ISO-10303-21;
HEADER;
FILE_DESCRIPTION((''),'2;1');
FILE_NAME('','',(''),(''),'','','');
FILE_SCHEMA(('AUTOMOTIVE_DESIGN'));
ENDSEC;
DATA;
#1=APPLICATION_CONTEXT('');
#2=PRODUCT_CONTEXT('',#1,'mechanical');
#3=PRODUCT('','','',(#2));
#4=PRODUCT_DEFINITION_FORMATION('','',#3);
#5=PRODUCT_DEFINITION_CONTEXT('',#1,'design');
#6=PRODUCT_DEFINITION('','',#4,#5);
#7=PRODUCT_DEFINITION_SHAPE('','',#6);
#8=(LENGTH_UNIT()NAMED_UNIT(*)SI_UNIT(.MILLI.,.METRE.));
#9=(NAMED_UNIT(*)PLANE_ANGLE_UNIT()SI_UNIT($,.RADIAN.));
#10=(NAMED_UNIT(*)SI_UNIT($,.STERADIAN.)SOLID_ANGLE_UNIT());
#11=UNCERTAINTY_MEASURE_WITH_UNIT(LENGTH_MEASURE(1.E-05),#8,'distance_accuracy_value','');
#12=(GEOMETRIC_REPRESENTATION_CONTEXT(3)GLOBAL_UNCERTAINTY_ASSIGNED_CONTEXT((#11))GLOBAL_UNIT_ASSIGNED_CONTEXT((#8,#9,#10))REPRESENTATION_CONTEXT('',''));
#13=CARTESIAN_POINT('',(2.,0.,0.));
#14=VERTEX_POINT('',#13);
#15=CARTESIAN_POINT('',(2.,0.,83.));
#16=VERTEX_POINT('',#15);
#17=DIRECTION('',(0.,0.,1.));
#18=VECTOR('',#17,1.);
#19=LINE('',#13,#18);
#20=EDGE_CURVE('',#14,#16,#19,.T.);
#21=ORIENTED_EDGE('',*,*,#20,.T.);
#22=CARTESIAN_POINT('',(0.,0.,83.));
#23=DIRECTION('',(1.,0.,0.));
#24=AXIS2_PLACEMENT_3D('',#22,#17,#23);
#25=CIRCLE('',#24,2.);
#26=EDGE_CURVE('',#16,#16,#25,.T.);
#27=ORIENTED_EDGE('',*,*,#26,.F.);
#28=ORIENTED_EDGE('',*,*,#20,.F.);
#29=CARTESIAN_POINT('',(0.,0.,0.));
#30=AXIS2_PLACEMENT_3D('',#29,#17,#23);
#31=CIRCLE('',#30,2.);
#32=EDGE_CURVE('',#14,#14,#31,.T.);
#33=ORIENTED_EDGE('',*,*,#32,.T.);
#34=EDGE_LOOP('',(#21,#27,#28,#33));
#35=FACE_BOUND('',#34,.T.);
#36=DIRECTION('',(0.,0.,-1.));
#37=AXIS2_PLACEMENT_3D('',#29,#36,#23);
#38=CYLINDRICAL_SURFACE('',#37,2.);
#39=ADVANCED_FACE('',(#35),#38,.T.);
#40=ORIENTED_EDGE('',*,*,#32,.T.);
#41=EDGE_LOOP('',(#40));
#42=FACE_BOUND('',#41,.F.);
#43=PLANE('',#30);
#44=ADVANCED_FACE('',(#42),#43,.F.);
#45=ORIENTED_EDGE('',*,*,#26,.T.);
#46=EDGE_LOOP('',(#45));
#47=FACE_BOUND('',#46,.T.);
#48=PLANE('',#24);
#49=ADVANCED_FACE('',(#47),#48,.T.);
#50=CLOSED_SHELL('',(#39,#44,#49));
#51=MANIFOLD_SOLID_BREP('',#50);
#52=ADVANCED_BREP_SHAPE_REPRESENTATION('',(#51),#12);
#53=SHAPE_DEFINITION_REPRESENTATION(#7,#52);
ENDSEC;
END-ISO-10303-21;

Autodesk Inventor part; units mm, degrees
ref_plane "YZ Plane" through (0, 0, 0) normal (1, 0, 0) x (0, 1, 0)
ref_plane "XZ Plane" through (0, 0, 0) normal (0, 1, 0) x (-1, 0, 0)
ref_plane "XY Plane" through (0, 0, 0) normal (0, 0, 1) x (1, 0, 0)
sketch "Sketch1" plane through (0, 0, 0) normal (0, 0, 1) x (1, 0, 0)
  circle A0 centre (0, 0) radius 2
  dimension "d0" = 4
extrude "Extrusion1" add sketch "Sketch1" along normal blind 83
thread "Thread1" size "M4x0.7" class "6g" standard "ISO Metric profile" length 5.5
thread "Thread2" size "M4x0.7" class "6g" standard "ISO Metric profile" length 5.5
properties part number "wałek-blatu" material "Stainless Steel"
